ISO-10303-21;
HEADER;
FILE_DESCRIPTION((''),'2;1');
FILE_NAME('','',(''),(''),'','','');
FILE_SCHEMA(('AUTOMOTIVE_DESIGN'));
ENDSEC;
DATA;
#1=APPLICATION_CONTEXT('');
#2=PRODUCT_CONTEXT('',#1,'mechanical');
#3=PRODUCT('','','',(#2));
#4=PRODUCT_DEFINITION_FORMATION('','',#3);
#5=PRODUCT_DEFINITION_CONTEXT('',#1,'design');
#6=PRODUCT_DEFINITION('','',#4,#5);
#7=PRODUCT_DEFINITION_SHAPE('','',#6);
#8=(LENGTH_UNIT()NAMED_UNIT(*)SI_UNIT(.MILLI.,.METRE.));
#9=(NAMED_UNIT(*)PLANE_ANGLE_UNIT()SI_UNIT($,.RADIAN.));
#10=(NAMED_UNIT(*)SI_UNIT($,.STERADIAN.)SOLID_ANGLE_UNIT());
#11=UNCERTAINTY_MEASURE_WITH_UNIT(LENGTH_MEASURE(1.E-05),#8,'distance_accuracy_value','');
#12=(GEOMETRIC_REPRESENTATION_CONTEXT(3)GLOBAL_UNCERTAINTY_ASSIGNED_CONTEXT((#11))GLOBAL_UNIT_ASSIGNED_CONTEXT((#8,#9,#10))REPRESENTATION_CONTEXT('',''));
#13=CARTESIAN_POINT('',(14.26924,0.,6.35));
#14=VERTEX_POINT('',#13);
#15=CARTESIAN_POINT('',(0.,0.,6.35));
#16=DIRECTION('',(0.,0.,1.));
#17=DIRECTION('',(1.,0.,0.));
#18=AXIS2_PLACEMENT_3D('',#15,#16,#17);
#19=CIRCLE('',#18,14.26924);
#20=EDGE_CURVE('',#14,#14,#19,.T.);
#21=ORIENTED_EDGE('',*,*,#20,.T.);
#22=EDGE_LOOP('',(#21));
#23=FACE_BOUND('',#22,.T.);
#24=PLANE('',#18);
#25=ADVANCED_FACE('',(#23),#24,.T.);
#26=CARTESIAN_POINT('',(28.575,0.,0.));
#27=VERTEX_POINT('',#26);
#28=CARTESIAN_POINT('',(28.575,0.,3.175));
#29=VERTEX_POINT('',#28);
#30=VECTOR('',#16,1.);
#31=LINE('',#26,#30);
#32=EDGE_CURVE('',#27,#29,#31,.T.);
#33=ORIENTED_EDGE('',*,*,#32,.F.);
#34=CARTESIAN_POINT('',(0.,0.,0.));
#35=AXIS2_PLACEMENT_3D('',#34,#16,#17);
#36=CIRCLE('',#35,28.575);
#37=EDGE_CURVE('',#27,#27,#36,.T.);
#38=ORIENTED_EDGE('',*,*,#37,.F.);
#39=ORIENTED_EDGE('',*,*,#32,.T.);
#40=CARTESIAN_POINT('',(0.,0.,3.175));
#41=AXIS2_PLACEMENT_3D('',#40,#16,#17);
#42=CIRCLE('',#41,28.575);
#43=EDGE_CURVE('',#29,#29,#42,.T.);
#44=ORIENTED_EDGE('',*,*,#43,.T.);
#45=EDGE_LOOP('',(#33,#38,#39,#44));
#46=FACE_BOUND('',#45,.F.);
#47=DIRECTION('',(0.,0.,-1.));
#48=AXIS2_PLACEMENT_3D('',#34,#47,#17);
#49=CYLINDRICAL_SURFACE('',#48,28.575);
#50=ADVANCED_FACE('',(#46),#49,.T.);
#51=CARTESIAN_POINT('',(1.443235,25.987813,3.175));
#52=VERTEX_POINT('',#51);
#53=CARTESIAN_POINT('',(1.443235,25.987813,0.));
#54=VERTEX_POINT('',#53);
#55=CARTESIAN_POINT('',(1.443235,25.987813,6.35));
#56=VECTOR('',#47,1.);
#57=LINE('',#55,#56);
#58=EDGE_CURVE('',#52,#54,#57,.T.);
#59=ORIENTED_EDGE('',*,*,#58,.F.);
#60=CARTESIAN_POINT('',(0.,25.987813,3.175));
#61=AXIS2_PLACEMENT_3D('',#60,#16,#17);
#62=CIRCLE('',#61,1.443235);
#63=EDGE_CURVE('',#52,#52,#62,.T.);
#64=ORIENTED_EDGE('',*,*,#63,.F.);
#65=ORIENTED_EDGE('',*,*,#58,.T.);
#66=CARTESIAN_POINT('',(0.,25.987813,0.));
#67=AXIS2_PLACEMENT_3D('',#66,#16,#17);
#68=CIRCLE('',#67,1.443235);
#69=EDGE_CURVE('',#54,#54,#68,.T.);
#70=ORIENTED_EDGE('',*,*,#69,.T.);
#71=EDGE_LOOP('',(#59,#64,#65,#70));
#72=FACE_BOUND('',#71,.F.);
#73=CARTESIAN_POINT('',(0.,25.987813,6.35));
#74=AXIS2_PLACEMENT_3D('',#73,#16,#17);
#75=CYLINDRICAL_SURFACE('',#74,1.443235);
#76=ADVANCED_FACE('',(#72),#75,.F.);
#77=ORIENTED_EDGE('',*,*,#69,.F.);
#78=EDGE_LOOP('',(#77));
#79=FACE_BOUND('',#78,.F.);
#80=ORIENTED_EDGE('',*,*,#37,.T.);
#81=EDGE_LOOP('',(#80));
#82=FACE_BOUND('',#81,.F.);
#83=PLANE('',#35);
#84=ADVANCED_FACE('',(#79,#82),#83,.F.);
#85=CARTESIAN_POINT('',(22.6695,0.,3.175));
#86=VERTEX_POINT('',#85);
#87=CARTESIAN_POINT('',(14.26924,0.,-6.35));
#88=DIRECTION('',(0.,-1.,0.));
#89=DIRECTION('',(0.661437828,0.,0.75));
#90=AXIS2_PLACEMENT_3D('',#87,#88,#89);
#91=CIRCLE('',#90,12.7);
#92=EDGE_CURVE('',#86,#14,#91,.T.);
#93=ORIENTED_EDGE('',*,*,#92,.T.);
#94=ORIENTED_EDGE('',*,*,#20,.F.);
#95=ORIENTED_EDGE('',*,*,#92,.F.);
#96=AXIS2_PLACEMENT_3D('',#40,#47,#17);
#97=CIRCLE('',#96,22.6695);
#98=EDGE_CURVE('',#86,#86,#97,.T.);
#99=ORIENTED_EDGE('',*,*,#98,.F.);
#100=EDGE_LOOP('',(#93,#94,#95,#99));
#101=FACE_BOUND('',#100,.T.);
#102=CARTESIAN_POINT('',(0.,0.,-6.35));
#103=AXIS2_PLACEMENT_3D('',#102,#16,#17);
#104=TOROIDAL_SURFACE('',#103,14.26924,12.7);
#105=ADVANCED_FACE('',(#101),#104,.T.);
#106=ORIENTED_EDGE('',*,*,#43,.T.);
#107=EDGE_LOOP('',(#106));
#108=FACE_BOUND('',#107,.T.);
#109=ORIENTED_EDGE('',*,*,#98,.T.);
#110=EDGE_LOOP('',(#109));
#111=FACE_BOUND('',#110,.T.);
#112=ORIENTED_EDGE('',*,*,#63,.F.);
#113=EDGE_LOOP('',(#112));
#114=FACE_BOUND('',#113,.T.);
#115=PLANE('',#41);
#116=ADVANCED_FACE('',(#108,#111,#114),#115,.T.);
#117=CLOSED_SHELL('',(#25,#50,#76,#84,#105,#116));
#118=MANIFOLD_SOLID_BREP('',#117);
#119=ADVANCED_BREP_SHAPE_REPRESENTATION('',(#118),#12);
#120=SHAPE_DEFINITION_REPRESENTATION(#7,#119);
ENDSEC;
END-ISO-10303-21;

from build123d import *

# Parameters (mm, degrees)
F0_R     = 28.575
F2_DEPTH = 3.175
F1_R     = 22.6695
F3_DEPTH = 6.35
F4_R     = 1.4432349382
F5_DEPTH = 6.351


# Not quite as in the source:
# - a fillet or chamfer that OpenCascade refuses, or shapes differently, is made with other operations: its cross-section is extruded or revolved along the edge and cut away or added


with BuildPart() as f2:
    # F0 (on Top) → F2 (new body)
    with BuildSketch(Plane.XY):
        Circle(F0_R)
    extrude(amount=F2_DEPTH)

    # F1 (on Top) → F3 (join)
    with BuildSketch(Plane.XY):
        Circle(F1_R)
    extrude(amount=F3_DEPTH)

    # F4 (on face) → F5 (cut, through all)
    with BuildSketch(Plane.XY.offset(6.35)):
        with Locations((0, 25.9878132492)):
            Circle(F4_R)
    extrude(amount=-F5_DEPTH, mode=Mode.SUBTRACT)

    # F6: fillet of radius 12.7 on 1 edges, made by hand

    # F6_s1 → F6_t2 (revolve, cut)
    with BuildSketch(Plane.XZ):
        with BuildLine():
            ThreePointArc((22.6695, 3.175), (18.7593676479, 5.529762203), (14.2692395874, 6.35))
            Line((14.2692395874, 6.35), (14.2692395874, 6.604))
            Line((14.2692395874, 6.604), (22.6695, 6.604))
            Line((22.6695, 6.604), (22.9235, 6.35))
            ThreePointArc((22.9235, 6.35), (22.9235, 4.7625), (22.8375052083, 3.3655))
            Line((22.8375052083, 3.3655), (22.6695, 3.175))
        make_face()
    revolve(axis=Axis((0, 0, 6.35), (0, 0, 1)), mode=Mode.SUBTRACT)


solid = f2.part
